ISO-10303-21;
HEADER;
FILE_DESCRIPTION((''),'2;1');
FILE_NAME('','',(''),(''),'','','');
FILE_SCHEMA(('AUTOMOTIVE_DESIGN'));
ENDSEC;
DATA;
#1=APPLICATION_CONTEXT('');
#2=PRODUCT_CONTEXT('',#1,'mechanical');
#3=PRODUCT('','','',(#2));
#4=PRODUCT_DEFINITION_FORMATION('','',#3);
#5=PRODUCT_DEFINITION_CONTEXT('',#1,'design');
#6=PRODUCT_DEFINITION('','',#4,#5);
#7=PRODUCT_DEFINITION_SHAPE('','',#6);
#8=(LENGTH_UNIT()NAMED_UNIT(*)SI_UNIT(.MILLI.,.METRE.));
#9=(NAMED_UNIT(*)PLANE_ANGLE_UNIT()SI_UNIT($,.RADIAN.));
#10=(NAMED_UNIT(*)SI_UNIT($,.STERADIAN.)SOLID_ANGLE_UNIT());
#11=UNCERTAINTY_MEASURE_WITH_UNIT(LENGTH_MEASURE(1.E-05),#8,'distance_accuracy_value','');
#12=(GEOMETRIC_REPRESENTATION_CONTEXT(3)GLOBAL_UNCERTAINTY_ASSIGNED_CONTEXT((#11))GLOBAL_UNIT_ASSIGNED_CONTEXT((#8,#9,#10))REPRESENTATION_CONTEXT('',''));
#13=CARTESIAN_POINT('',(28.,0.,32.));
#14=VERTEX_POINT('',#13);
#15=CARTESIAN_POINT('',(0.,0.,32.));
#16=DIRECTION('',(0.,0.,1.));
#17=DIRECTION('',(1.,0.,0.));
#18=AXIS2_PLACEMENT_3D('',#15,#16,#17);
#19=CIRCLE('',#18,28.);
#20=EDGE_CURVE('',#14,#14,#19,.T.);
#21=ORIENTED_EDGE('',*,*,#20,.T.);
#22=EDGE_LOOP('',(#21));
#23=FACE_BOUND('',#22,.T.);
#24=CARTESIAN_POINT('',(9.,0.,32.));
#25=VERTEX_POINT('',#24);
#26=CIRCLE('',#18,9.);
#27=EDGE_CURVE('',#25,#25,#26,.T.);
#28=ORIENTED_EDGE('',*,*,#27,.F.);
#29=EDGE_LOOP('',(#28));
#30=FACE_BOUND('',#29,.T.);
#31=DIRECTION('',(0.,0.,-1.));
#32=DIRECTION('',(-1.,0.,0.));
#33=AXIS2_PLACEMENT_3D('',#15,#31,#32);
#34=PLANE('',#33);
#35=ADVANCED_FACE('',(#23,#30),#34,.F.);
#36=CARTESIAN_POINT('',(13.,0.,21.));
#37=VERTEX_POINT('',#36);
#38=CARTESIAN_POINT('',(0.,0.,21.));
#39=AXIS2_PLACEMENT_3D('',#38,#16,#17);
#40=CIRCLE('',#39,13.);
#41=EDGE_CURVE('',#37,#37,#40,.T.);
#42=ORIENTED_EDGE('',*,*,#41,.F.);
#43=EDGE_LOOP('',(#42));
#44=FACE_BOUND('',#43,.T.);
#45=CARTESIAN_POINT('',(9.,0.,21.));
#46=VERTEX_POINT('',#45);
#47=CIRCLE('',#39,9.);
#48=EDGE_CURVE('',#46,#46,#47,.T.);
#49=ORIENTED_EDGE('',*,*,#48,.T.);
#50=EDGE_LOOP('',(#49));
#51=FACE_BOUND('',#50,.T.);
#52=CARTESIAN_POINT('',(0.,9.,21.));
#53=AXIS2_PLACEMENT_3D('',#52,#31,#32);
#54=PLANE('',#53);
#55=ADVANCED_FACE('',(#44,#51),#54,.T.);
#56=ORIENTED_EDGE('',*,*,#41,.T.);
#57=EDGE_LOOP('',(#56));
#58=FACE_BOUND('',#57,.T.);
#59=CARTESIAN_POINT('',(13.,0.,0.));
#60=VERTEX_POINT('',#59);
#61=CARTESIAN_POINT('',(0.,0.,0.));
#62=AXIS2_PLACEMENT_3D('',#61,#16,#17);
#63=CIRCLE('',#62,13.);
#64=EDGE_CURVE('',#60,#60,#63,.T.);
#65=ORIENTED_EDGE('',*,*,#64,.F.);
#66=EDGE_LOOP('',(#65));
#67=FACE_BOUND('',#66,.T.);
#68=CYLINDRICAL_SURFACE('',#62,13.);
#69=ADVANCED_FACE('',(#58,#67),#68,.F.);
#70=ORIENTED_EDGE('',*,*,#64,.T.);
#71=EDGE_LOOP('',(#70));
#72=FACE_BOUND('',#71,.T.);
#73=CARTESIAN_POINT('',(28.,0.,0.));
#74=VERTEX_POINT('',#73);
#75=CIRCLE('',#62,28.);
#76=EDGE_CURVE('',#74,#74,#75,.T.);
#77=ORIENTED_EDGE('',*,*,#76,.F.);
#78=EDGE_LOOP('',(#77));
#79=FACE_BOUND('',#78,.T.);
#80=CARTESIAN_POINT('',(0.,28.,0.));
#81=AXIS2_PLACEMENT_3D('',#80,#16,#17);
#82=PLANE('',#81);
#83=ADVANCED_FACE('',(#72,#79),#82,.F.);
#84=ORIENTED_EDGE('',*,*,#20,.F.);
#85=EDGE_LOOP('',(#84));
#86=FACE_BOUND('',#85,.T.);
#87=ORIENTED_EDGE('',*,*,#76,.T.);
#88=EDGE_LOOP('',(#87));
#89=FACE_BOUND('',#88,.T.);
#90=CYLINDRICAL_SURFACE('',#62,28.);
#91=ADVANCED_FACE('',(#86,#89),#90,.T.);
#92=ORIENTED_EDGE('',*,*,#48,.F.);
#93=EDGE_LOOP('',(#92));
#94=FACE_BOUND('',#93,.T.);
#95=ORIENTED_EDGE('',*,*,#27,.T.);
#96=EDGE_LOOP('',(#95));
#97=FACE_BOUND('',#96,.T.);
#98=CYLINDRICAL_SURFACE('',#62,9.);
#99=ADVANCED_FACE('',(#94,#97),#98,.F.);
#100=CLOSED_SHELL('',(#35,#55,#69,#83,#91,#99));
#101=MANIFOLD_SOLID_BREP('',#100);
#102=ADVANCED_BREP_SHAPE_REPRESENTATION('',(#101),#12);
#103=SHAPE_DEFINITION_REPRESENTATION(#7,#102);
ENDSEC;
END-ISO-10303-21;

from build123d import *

# Parameters (mm, degrees)
SZKIC1_W                    = 32
SZKIC1_H                    = 28
SZKIC3_R                    = 21
DODANIE_WYCI_GNI_CIE1_DEPTH = 14


# Read off the part's stored shape, not the designer's step: Usuń ścianę1
with BuildPart() as part:
    # Szkic1 → Obrót1 (revolve)
    with BuildSketch(Plane(origin=(0, 0, 0), x_dir=(0, 0, -1), z_dir=(1, 0, 0)), mode=Mode.PRIVATE) as obr_t1_sk:
        with Locations((-16, 14)):
            Rectangle(SZKIC1_W, SZKIC1_H)
    revolve(obr_t1_sk.sketch.rotate(Axis((0, 0, 0), (0, 0, 1)), 270), axis=Axis((0, 0, 0), (0, 0, 1)))

    # Szkic2 → Wycięcie-obrót1 (revolve, cut)
    with BuildSketch(Plane(origin=(0, 0, 0), x_dir=(0, 0, -1), z_dir=(1, 0, 0)), mode=Mode.PRIVATE) as wyci_cie_obr_t1_sk:
        Polygon((-32, 0), (-32, 9), (-21, 9), (-21, 13), (0, 13), (0, 0), align=None)
    revolve(wyci_cie_obr_t1_sk.sketch.rotate(Axis((0, 0, 0), (0, 0, 1)), 270), axis=Axis((0, 0, 0), (0, 0, 1)), mode=Mode.SUBTRACT)


with BuildPart() as body_2:
    # Szkic3 → Dodanie-wyciągnięcie1 (new body)
    with BuildSketch(Plane(origin=(0, 0, 0), x_dir=(0, 0, -1), z_dir=(1, 0, 0))):
        Circle(SZKIC3_R)
    extrude(amount=DODANIE_WYCI_GNI_CIE1_DEPTH)


solid = part.part
